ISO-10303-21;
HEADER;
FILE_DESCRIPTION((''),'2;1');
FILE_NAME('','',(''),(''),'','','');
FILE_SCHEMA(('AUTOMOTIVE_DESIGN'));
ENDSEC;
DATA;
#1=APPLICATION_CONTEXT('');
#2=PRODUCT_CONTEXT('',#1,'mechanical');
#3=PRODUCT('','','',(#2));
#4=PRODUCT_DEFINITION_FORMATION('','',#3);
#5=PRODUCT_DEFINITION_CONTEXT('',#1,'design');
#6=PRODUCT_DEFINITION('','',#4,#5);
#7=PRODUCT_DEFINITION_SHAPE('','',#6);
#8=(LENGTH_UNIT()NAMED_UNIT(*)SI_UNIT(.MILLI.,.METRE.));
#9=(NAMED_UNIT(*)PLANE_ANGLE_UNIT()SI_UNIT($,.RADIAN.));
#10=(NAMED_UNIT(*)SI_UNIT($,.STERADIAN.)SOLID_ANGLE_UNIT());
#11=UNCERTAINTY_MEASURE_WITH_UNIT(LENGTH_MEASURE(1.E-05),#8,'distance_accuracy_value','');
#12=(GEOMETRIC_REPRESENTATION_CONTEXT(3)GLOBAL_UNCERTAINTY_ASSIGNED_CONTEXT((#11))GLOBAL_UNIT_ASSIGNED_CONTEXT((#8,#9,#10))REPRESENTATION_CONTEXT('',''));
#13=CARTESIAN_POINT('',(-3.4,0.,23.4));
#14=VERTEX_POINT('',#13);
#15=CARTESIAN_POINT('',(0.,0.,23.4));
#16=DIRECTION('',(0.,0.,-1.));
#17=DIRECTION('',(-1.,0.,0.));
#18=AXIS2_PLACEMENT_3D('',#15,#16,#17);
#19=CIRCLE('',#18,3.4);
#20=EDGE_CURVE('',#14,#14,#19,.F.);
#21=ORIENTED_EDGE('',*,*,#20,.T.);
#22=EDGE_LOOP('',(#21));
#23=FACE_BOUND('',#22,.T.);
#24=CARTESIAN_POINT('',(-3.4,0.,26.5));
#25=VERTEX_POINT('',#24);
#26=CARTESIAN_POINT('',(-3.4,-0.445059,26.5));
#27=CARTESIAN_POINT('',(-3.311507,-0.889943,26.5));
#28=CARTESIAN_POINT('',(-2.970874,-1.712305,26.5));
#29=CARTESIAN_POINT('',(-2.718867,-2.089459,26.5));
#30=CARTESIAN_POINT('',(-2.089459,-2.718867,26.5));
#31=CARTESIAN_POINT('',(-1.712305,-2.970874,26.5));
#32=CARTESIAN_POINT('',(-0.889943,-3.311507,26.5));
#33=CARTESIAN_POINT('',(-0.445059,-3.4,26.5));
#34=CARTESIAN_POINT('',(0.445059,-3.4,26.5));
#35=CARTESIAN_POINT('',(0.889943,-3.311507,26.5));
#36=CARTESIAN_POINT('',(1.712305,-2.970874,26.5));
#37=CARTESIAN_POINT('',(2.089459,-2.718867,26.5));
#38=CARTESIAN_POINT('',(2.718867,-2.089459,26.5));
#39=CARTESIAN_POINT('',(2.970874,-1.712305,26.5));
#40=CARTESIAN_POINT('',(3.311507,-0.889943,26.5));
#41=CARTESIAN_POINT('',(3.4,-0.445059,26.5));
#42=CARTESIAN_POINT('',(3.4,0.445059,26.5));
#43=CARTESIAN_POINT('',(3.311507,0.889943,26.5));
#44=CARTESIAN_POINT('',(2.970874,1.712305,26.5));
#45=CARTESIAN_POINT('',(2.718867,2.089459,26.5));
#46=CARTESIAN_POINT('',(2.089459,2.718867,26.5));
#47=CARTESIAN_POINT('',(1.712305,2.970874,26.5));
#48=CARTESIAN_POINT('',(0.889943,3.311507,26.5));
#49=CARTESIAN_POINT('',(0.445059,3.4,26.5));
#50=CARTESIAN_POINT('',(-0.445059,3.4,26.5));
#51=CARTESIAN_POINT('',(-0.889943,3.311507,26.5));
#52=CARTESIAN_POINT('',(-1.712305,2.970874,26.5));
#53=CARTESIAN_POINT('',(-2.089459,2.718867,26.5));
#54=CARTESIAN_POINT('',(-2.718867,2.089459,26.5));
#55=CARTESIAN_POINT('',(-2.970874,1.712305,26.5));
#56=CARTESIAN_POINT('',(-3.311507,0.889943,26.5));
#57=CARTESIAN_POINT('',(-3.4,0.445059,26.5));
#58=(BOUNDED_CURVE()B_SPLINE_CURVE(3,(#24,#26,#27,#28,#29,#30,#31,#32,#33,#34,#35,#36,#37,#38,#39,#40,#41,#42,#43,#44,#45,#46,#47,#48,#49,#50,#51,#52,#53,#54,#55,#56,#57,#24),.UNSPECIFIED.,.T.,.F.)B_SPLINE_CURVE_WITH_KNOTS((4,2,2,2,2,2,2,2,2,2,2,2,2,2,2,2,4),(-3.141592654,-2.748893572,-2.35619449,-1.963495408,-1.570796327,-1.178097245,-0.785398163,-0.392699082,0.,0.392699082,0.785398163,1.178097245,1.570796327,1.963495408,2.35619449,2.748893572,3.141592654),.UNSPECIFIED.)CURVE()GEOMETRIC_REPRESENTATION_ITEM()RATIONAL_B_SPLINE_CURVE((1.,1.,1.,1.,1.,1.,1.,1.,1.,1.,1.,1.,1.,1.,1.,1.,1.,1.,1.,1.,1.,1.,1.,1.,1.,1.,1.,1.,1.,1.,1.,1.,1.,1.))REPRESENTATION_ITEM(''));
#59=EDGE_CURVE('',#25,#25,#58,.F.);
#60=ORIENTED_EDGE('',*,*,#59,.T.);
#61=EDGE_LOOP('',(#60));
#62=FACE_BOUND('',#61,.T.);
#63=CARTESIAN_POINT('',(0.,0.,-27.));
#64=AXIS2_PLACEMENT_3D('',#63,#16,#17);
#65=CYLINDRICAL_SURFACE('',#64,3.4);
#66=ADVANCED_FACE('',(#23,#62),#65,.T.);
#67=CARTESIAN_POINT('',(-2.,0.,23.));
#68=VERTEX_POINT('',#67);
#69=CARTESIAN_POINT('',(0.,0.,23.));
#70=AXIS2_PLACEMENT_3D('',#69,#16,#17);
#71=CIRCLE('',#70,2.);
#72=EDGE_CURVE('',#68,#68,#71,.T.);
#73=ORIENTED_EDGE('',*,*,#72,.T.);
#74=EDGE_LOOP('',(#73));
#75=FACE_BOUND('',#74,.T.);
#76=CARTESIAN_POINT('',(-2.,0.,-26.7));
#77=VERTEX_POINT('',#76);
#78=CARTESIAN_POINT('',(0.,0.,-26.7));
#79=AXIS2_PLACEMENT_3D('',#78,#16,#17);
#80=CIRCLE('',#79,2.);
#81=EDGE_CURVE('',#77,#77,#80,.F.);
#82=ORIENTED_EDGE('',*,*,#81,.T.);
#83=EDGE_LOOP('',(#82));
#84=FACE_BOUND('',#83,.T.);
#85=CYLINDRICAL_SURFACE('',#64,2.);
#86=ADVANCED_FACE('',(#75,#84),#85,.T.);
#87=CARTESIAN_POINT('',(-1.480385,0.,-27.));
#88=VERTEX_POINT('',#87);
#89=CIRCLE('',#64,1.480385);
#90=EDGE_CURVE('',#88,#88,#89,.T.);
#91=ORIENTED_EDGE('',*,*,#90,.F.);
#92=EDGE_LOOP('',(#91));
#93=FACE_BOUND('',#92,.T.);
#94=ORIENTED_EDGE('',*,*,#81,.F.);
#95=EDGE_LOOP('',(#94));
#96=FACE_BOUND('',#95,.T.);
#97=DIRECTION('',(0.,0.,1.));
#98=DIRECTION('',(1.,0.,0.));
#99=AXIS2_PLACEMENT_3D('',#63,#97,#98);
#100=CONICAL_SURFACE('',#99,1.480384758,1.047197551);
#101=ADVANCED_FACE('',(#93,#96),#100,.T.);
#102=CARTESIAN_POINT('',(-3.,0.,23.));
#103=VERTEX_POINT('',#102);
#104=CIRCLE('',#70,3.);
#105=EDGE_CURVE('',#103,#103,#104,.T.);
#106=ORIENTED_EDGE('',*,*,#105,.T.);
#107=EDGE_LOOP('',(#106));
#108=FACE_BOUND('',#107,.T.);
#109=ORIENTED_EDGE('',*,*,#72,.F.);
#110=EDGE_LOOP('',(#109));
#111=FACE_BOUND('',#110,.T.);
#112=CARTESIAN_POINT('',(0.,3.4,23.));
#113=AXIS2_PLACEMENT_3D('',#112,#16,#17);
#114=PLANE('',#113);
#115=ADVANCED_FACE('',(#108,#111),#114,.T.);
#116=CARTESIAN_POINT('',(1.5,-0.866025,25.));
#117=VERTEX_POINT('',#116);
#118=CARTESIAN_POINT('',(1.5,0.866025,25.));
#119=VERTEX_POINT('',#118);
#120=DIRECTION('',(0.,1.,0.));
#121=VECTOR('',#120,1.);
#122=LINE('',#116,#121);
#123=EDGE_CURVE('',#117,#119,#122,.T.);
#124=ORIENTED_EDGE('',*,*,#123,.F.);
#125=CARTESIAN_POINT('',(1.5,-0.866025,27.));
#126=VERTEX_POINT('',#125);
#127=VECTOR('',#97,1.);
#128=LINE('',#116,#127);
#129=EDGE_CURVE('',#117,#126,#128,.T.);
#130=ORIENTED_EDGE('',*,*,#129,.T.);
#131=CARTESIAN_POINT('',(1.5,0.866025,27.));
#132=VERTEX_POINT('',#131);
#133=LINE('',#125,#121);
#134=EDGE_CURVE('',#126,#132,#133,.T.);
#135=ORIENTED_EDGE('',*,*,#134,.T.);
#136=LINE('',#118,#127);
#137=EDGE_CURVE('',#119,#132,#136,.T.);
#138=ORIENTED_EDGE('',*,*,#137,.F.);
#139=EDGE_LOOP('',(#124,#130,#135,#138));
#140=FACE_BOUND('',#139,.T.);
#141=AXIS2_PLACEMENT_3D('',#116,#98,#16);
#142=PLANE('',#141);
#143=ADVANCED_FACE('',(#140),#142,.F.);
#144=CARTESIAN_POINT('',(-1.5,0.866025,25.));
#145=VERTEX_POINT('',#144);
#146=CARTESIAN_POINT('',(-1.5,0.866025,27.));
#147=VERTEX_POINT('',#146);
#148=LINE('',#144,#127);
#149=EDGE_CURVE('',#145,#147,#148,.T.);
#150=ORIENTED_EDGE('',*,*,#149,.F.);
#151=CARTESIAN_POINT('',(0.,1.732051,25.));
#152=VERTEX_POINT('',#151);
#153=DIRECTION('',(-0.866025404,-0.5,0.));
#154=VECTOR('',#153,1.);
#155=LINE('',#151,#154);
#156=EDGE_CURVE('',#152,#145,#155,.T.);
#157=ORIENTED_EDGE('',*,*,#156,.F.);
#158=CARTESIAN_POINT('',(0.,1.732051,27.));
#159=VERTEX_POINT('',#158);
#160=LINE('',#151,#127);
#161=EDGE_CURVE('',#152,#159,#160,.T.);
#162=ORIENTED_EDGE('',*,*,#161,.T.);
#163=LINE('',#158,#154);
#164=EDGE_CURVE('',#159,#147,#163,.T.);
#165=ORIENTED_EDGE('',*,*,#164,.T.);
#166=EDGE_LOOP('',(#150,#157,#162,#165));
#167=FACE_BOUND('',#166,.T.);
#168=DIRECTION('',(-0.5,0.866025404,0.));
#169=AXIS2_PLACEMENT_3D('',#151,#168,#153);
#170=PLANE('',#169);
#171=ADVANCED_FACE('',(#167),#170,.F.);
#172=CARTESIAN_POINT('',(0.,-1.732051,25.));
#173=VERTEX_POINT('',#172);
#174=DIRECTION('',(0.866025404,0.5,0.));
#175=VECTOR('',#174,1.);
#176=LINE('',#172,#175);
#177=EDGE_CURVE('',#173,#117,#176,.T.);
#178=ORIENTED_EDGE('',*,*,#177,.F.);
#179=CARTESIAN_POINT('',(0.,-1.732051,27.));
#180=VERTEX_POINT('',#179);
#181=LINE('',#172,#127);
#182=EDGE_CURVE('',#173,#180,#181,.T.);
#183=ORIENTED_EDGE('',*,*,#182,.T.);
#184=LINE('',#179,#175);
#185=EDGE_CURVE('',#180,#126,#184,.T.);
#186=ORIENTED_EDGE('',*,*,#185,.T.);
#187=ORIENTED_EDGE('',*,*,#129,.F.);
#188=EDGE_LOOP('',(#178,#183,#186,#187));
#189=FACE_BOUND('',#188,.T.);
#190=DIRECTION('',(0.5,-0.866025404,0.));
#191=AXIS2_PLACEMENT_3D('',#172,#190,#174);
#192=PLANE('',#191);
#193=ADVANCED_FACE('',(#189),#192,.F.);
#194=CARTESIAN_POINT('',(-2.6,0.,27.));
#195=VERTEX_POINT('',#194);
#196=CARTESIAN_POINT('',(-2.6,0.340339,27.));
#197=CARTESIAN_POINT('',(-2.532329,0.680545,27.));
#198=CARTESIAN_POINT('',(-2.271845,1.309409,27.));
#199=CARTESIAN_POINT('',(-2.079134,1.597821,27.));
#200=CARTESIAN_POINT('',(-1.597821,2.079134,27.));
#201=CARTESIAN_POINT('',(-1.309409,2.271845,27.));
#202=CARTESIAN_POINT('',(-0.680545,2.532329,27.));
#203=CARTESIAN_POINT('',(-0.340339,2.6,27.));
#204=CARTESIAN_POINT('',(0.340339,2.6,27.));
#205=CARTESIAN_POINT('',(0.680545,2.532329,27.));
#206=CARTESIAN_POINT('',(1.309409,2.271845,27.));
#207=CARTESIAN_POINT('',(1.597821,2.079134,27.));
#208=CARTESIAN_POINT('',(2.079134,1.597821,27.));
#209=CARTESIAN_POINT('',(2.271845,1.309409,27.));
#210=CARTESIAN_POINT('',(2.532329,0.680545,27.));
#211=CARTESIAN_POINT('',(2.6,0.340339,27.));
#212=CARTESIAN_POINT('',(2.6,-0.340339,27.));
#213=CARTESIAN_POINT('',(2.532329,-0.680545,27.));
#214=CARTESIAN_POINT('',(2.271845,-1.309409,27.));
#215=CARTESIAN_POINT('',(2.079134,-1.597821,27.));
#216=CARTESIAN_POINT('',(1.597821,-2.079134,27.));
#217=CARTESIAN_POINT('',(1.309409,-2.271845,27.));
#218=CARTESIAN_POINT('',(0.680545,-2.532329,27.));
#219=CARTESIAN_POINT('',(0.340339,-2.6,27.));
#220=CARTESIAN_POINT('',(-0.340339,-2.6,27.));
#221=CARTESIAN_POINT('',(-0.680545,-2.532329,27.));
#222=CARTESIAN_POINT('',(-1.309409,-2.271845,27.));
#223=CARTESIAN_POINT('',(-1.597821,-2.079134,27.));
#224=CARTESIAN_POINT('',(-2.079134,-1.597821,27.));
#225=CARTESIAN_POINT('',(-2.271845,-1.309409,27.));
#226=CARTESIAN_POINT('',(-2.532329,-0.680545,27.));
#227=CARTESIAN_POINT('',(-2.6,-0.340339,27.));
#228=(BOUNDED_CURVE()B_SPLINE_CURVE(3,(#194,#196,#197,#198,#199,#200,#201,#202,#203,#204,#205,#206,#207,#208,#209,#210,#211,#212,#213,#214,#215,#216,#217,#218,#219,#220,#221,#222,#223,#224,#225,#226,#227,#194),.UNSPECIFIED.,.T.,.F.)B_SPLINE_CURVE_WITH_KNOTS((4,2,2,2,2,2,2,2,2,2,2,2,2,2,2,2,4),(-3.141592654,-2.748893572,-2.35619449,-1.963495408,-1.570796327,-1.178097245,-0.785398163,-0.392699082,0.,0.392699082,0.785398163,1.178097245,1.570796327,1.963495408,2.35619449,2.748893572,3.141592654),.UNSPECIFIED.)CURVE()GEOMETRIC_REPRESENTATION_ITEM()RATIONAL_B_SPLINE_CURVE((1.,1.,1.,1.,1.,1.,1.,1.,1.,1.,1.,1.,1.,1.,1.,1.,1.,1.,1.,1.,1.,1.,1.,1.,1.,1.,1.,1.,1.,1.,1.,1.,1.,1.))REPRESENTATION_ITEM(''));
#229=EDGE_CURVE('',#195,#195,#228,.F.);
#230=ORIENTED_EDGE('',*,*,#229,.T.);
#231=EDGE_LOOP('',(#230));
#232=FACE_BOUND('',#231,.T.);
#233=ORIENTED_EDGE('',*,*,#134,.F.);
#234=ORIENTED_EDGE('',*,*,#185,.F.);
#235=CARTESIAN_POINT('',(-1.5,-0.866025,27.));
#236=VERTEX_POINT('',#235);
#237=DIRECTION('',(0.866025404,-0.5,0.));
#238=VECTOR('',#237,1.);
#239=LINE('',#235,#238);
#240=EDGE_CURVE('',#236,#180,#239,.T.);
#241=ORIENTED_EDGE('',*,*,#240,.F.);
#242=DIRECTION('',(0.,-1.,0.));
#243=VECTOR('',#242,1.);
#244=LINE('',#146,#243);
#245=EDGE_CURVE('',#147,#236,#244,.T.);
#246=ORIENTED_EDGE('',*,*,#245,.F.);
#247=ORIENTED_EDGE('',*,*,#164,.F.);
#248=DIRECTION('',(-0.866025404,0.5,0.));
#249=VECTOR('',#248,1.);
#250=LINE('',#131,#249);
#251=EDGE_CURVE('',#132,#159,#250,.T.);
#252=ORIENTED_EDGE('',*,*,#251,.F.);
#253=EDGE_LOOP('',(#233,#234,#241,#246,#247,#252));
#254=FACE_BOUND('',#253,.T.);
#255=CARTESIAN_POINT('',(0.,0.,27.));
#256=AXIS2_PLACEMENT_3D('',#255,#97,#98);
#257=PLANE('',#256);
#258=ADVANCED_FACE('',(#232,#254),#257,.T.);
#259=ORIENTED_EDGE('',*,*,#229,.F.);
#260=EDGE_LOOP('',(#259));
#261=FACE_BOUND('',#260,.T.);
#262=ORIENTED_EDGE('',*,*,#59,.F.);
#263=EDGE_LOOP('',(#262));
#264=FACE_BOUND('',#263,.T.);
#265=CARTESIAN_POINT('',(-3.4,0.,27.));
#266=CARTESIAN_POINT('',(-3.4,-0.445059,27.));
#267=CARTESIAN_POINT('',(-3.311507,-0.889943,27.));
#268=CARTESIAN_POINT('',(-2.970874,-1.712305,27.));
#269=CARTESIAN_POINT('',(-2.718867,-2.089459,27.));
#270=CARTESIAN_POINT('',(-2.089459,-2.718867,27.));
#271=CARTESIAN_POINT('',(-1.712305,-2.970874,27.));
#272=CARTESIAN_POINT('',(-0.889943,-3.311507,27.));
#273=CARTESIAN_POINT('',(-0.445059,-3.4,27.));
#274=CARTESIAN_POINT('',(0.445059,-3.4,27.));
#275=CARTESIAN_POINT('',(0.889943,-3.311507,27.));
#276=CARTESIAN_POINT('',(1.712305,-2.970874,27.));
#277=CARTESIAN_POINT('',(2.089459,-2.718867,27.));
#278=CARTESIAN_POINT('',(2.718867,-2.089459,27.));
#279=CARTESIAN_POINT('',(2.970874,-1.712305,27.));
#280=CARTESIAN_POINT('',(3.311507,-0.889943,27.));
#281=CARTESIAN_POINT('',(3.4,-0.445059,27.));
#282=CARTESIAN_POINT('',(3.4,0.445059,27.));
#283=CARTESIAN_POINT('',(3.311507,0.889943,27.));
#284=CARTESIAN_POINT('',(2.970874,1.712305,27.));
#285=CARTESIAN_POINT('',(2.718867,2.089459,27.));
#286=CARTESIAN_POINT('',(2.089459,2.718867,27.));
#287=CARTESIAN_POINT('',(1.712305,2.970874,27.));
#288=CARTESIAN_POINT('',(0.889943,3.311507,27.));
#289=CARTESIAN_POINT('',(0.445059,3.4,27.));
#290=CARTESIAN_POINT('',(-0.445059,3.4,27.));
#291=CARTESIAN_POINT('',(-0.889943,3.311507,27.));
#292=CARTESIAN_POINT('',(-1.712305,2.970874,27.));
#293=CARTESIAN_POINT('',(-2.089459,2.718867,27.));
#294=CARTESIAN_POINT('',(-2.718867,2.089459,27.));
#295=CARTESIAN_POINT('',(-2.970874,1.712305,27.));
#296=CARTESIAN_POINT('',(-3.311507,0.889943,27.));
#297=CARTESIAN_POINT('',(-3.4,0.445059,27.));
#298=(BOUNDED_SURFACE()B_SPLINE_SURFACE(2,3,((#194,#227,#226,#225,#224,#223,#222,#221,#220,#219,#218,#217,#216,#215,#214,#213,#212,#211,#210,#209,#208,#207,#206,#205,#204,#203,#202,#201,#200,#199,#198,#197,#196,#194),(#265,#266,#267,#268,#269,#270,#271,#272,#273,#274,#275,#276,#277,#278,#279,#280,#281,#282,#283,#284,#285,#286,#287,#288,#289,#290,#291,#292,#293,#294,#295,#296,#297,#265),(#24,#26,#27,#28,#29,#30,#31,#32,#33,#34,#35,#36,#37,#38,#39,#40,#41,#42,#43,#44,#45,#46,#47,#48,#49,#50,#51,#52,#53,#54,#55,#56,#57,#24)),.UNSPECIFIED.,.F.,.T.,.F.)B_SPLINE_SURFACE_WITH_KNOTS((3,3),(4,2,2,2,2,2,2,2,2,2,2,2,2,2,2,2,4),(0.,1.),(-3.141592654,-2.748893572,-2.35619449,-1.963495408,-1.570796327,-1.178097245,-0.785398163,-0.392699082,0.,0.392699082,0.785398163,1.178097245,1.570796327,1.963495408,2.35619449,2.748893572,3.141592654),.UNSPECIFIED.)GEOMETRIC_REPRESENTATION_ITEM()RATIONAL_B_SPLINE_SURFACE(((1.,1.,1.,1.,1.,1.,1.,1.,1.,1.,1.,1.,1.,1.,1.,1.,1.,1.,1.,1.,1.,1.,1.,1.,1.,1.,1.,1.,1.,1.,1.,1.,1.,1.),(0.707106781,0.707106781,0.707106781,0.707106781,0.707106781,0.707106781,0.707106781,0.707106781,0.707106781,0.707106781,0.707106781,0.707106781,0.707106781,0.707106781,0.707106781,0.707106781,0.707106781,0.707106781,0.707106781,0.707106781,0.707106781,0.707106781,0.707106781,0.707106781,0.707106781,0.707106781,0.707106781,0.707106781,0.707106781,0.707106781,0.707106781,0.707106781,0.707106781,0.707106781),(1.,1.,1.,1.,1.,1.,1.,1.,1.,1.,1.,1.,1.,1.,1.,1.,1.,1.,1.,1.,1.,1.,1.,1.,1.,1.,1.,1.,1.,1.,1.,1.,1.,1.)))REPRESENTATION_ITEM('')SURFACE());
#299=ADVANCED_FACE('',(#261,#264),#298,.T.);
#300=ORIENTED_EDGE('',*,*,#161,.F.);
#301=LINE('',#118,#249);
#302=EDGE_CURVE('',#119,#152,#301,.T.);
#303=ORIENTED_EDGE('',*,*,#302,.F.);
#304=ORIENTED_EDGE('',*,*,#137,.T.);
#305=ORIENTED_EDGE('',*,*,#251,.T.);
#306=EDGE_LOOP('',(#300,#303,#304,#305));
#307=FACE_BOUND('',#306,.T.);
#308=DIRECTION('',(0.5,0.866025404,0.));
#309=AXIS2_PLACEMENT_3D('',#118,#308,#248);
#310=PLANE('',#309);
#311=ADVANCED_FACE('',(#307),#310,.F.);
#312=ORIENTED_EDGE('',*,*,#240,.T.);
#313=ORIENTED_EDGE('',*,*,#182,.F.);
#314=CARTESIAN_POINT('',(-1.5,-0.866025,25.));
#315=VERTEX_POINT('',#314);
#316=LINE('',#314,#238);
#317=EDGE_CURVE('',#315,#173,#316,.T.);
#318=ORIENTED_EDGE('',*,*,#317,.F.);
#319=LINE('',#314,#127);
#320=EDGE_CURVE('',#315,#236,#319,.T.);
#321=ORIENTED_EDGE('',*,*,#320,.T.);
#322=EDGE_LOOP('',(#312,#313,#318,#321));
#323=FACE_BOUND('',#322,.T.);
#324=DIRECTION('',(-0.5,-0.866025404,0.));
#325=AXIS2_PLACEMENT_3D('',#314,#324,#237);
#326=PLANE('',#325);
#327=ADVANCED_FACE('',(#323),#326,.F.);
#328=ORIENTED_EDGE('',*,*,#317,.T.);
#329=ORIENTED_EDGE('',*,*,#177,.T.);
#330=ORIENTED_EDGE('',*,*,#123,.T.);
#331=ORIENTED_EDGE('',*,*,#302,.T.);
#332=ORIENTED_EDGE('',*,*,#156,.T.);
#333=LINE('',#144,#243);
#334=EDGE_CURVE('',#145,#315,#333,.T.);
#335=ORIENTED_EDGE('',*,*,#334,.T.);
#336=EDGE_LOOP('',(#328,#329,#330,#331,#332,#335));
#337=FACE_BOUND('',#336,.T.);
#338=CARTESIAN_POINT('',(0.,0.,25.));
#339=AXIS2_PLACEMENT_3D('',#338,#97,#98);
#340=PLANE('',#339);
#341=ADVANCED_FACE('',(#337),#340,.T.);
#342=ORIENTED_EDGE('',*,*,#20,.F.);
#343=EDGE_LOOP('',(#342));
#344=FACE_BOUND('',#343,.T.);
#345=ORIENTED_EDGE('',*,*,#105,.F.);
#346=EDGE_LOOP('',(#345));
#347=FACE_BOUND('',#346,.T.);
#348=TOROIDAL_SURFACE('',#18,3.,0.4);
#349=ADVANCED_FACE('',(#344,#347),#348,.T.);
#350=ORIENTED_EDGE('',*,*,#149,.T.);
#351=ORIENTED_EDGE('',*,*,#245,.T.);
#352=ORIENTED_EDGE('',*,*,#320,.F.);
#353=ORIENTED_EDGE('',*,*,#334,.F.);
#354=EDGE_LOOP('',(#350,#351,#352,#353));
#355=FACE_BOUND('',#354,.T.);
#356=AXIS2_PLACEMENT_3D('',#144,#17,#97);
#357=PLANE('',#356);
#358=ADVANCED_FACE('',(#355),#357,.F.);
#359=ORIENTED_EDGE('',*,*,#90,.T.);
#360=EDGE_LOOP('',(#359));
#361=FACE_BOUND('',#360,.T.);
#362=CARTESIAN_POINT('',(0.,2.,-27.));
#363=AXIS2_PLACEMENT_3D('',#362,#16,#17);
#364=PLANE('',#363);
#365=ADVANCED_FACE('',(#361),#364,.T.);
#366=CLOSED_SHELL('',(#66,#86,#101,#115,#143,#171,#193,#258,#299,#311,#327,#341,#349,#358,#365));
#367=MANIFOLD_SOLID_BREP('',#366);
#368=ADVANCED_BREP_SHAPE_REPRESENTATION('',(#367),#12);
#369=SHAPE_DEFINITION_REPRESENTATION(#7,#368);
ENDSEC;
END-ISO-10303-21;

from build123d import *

# Parameters (mm, degrees)
CHAMFER_1_SIZE      = 0.3
CHAMFER_1_SIZE2     = 0.519615242
FILLET_1_R          = 0.4
FILLET_2_SIZE       = 0.5
FILLET_2_SIZE_2     = 0.8
CUT_EXTRUDE_1_DEPTH = 2


with BuildPart() as part:
    # 草图2 → 旋转1 (revolve)
    with BuildSketch(Plane(origin=(0, 0, 0), x_dir=(0, 0, -1), z_dir=(1, 0, 0)), mode=Mode.PRIVATE) as revolve_1_sk:
        Polygon((-27, 0), (-27, 3.4), (-23, 3.4), (-23, 2), (27, 2), (27, 0), align=None)
    revolve(revolve_1_sk.sketch.rotate(Axis((0, 0, -27), (0, 0, 1)), 90), axis=Axis((0, 0, -27), (0, 0, 1)))

    # 倒角1
    chamfer_1_edges = [part.edges().sort_by_distance(p)[0] for p in [
        (2, 0, -27),
    ]]
    chamfer_1_side = [part.faces().sort_by_distance(p)[0] for p in [
        (2, 0, -2),
    ]]
    chamfer(chamfer_1_edges, length=CHAMFER_1_SIZE, length2=CHAMFER_1_SIZE2, reference=chamfer_1_side[0])

    # 圆角1
    fillet_1_edges = [part.edges().sort_by_distance(p)[0] for p in [
        (3.4, 0, 23),
    ]]
    fillet(fillet_1_edges, radius=FILLET_1_R)

    # 圆角2
    # an asymmetric fillet: 0.8, 0.5 mm, written as the material it takes off along each edge
    with BuildSketch(Plane(origin=(0, 0, 27), x_dir=(-1, 0, 0), z_dir=(0, 1, 0))) as fillet_2_piece_1:
        with BuildLine():
            Bezier((3.4, -FILLET_2_SIZE), (3.4, 0), (3.4 - FILLET_2_SIZE_2, 0), weights=[1, 0.707106781, 1])
            Line((3.4 - FILLET_2_SIZE_2, 0), (3.4, 0))
            Line((3.4, 0), (3.4, -FILLET_2_SIZE))
        make_face()
    revolve(axis=Axis((0, 0, 27), (0, 0, 1)), mode=Mode.SUBTRACT)

    # 草图3 → 切除-拉伸1 (cut)
    with BuildSketch(Plane.XY.offset(27)):
        Polygon((0, 1.732050808), (-1.5, 0.866025404), (-1.5, -0.866025404), (0, -1.732050808), (1.5, -0.866025404), (1.5, 0.866025404), align=None)
    extrude(amount=-CUT_EXTRUDE_1_DEPTH, mode=Mode.SUBTRACT)


solid = part.part
